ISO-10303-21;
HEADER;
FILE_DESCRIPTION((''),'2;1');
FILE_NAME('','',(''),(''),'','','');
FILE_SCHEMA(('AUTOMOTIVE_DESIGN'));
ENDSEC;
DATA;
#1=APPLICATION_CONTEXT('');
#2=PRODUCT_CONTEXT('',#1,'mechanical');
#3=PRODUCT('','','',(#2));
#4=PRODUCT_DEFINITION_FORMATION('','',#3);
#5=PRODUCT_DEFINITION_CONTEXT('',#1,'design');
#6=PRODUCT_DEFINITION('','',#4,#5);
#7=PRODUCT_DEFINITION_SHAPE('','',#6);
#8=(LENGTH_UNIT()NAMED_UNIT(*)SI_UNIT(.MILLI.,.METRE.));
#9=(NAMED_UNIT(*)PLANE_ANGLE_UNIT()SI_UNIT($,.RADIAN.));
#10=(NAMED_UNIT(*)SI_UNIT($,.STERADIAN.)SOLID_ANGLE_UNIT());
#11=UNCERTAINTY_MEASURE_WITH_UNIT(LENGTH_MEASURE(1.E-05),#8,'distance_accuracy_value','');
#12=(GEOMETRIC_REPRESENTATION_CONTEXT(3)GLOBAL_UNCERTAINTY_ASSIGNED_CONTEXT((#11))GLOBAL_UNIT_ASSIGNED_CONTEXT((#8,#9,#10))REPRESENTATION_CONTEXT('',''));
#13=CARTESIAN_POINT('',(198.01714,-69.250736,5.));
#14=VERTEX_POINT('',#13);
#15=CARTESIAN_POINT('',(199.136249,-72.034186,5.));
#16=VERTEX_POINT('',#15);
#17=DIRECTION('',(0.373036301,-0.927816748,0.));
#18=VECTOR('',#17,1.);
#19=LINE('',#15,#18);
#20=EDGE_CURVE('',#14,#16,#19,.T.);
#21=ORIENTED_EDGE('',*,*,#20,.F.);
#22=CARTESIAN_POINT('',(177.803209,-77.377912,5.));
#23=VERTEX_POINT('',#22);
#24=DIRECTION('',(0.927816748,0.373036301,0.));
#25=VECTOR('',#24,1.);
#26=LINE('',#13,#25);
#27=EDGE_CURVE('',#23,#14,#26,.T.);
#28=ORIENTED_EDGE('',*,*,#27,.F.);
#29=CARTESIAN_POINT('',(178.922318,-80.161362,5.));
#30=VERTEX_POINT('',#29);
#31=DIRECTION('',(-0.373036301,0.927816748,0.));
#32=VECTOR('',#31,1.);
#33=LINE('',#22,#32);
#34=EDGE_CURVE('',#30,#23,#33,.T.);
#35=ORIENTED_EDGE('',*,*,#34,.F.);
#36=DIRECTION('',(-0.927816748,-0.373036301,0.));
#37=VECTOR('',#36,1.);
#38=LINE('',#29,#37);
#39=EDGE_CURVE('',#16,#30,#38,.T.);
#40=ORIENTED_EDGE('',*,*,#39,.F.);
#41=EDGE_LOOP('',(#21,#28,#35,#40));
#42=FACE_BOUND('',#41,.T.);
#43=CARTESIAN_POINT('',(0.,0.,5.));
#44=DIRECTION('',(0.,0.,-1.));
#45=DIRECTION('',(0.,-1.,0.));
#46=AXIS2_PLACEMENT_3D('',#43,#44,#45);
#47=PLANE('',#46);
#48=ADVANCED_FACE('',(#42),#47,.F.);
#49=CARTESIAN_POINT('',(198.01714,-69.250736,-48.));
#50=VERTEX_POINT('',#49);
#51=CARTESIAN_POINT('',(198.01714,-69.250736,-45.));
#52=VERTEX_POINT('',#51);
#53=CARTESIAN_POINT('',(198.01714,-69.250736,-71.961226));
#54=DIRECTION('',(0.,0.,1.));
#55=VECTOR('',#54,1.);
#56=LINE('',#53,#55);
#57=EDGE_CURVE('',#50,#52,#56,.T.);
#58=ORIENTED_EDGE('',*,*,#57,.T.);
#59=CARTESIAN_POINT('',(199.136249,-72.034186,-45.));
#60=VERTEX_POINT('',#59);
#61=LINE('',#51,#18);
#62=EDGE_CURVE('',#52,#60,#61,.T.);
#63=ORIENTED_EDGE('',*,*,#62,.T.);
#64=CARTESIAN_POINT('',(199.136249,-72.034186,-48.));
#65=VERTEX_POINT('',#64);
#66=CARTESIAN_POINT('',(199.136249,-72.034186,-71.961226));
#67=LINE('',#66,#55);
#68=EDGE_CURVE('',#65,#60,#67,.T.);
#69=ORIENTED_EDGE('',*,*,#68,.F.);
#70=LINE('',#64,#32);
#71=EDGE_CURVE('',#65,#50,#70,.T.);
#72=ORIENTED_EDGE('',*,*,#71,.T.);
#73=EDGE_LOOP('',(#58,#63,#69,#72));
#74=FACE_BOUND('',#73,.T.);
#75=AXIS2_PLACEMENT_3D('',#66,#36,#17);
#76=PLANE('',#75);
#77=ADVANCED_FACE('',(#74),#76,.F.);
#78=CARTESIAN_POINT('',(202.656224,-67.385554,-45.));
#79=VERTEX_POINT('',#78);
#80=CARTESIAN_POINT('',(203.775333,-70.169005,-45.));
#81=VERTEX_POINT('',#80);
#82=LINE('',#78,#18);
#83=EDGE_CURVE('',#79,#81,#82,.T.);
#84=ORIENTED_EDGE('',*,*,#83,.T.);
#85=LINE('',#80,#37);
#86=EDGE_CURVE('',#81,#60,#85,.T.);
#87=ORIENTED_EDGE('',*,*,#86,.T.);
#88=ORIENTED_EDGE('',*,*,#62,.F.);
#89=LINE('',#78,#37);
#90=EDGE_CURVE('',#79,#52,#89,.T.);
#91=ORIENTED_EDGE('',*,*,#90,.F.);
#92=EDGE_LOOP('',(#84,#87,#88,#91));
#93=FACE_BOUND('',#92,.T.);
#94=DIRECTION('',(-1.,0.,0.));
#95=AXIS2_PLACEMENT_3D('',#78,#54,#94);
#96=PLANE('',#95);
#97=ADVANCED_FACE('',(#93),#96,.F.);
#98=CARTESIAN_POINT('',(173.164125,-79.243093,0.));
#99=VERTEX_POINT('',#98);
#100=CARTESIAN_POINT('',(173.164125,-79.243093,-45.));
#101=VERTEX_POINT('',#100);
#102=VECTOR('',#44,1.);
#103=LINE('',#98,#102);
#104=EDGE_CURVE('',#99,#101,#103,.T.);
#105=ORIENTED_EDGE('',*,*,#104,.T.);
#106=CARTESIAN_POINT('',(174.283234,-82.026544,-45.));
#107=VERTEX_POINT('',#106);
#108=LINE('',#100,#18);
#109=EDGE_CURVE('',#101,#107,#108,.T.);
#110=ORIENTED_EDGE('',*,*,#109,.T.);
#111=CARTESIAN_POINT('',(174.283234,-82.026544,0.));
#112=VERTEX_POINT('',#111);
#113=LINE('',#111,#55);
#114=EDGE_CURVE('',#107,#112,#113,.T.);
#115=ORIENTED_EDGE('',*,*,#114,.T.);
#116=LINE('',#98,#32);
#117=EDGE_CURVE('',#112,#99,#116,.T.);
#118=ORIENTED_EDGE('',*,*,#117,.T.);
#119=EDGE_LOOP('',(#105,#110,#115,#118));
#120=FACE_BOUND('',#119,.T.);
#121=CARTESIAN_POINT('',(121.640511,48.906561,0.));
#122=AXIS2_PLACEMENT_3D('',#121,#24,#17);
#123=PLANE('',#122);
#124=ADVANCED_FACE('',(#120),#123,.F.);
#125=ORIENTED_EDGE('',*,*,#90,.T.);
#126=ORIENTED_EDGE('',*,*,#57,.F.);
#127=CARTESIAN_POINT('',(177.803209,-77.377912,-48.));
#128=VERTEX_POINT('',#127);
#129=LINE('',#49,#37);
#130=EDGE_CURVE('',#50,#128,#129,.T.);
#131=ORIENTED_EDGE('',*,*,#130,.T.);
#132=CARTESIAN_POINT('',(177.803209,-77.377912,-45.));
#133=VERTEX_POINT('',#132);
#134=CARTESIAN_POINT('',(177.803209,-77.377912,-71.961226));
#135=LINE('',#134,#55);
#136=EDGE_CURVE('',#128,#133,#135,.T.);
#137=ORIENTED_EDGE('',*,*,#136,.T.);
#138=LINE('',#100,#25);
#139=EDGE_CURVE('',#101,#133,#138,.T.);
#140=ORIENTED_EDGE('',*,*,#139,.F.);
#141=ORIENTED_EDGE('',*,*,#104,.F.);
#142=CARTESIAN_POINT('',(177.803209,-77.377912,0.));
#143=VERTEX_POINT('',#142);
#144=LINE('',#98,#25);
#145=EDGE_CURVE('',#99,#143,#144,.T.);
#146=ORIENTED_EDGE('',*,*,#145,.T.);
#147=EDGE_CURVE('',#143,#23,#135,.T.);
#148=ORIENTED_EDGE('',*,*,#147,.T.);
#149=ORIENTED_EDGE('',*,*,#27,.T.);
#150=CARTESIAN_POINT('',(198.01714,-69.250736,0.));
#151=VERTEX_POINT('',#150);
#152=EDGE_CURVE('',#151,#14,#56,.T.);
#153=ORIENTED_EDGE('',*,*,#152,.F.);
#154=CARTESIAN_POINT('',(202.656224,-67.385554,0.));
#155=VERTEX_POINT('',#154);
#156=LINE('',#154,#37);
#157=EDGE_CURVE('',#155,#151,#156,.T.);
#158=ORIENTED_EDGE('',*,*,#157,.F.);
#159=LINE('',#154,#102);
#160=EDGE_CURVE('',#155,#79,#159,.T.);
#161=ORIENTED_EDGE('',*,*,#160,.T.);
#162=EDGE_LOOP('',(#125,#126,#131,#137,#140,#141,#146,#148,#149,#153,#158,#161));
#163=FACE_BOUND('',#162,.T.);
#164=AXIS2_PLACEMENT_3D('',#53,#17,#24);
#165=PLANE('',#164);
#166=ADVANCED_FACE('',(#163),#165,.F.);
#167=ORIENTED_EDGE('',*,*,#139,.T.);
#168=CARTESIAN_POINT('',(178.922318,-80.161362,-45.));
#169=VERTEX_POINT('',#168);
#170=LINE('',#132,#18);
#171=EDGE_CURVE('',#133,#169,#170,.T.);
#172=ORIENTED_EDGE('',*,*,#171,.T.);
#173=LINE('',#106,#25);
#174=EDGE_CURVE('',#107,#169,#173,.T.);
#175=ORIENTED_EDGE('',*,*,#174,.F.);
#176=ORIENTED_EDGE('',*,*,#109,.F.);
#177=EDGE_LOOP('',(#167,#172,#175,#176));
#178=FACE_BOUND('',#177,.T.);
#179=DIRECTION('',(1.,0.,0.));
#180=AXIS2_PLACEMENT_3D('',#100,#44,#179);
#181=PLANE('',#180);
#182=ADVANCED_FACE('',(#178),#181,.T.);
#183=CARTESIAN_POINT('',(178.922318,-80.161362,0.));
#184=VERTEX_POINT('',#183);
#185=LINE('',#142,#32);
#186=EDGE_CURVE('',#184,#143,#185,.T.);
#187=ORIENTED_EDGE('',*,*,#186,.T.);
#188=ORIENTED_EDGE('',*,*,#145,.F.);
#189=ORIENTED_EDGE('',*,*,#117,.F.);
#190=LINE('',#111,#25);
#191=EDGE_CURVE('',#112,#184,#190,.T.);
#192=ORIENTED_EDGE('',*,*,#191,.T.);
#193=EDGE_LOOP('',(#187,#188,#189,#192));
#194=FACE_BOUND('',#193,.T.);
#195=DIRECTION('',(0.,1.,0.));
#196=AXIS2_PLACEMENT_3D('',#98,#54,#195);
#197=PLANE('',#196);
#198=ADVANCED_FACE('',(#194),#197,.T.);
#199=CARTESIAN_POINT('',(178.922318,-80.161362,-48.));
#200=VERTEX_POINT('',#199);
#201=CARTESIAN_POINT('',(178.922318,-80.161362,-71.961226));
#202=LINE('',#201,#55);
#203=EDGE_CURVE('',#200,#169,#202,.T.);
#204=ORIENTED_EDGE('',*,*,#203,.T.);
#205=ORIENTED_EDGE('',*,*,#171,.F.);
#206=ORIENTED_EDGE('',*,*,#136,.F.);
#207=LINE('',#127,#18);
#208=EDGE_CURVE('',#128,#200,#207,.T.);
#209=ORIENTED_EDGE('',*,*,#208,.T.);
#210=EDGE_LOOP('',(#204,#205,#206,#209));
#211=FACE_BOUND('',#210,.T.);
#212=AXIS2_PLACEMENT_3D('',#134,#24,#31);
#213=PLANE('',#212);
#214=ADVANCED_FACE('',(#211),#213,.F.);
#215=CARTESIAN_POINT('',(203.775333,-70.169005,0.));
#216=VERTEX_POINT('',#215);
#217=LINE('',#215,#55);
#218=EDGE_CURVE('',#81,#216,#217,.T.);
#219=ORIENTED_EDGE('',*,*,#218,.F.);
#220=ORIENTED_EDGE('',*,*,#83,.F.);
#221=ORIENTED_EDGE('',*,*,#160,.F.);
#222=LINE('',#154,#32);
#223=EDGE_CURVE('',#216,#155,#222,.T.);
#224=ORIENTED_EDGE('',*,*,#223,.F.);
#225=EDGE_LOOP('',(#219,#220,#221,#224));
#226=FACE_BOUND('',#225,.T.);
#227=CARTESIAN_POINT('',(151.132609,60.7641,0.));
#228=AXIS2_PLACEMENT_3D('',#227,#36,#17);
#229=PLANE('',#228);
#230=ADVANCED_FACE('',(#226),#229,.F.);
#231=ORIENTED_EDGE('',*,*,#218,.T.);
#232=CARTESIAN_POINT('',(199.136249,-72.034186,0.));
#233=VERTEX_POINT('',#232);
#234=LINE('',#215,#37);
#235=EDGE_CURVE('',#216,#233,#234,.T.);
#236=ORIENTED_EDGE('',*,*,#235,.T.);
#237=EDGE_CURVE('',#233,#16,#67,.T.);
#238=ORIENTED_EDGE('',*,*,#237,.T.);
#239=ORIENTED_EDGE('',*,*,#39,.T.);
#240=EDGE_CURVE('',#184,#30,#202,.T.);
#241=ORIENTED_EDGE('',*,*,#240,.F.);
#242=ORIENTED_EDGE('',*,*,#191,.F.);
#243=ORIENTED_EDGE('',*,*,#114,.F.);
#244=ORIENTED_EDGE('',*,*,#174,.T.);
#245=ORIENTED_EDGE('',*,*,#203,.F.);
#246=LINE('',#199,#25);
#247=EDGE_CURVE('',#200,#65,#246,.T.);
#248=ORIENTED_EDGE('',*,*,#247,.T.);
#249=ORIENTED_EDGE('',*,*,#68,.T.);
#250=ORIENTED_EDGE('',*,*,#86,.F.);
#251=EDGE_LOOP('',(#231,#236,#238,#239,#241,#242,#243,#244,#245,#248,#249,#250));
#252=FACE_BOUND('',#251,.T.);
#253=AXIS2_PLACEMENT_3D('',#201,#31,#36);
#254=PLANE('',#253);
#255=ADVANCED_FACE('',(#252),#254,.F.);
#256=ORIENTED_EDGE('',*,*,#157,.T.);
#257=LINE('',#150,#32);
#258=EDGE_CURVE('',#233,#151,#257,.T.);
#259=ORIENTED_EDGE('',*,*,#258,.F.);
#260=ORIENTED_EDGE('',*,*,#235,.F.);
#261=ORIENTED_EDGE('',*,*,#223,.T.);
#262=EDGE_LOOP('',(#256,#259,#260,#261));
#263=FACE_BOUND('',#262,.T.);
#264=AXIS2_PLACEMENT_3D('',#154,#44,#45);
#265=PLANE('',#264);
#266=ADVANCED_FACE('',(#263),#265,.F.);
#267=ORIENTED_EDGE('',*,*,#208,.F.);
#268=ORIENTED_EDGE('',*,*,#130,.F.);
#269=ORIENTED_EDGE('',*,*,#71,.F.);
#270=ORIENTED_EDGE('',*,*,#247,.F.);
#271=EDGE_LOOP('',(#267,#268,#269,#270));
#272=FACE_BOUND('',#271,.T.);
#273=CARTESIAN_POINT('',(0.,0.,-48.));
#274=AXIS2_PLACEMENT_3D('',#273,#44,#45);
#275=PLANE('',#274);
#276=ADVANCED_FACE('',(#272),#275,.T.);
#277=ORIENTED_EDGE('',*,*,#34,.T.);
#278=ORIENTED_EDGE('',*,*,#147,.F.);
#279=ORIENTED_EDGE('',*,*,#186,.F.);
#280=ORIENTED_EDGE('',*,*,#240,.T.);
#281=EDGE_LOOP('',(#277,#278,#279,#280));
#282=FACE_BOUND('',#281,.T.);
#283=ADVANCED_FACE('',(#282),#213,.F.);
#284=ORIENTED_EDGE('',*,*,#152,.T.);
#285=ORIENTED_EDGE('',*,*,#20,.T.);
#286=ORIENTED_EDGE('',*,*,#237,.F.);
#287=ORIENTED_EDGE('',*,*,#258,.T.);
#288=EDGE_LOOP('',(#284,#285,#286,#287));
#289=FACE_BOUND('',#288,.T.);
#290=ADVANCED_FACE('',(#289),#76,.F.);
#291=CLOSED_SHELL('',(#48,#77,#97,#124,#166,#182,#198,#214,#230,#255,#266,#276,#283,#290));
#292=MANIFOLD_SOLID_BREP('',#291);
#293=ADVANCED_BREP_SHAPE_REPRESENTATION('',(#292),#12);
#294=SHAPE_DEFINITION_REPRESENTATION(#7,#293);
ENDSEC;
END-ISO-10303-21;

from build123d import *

# Parameters (mm, degrees)
ESTRUSIONE_ESTRUSIONE1_DEPTH      = 48
ESTRUSIONE_ESTRUSIONE1_DEPTH_BACK = 5
SCHIZZO2_W                        = 45
SCHIZZO2_H                        = 3
ESTRUSIONE_ESTRUSIONE2_DEPTH      = 5
CORPO_SPOSTA_COPIA1_START         = 131.104025403
CORPO_SPOSTA_COPIA1_OUTLINE_W     = 3
CORPO_SPOSTA_COPIA1_OUTLINE_H     = 43
CORPO_SPOSTA_COPIA1_DEPTH         = 31.786555516
CORPO_SPOSTA_COPIA1_2_OUTLINE_W   = 3
CORPO_SPOSTA_COPIA1_2_OUTLINE_H   = 5
CORPO_SPOSTA_COPIA1_2_DEPTH       = 5
CORPO_SPOSTA_COPIA1_START_2       = 157.890580919
CORPO_SPOSTA_COPIA1_3_OUTLINE_W   = 3
CORPO_SPOSTA_COPIA1_3_OUTLINE_H   = 5
CORPO_SPOSTA_COPIA1_3_DEPTH       = 5
CORPO_SPOSTA_COPIA1_4_OUTLINE_W   = 3
CORPO_SPOSTA_COPIA1_4_OUTLINE_H   = 45
CORPO_SPOSTA_COPIA1_4_DEPTH       = 31.786555516
CORPO_SPOSTA_COPIA1_START_3       = 136.104025403
CORPO_SPOSTA_COPIA1_5_OUTLINE_W   = 3
CORPO_SPOSTA_COPIA1_5_OUTLINE_H   = 3
CORPO_SPOSTA_COPIA1_5_DEPTH       = 21.786555516


# Read off the part's stored shape, not the designer's step: Corpo-Sposta/copia1
with BuildPart() as part:
    # Schizzo1 → Estrusione-Estrusione1 (new, two sides: drawn at the far end of the back side and taken through both)
    with BuildSketch(Plane.XY.offset(-ESTRUSIONE_ESTRUSIONE1_DEPTH_BACK)):
        Polygon((198.017140331, -69.250735791), (177.803209237, -77.377911869), (178.92231814, -80.161362114), (199.136249234, -72.034186035), align=None)
    extrude(amount=ESTRUSIONE_ESTRUSIONE1_DEPTH + ESTRUSIONE_ESTRUSIONE1_DEPTH_BACK)

    # Schizzo2 → Estrusione-Estrusione2 (add)
    with BuildSketch(Plane(origin=(146.49352536, 58.898918246, 0), x_dir=(0, 0, -1), z_dir=(0.9278167482016688, 0.3730363008562049, 0))):
        with Locations((-22.5, -139.619574027)):
            Rectangle(SCHIZZO2_W, SCHIZZO2_H)
    estrusione_estrusione2 = extrude(amount=ESTRUSIONE_ESTRUSIONE2_DEPTH)

    # Specchia1: Estrusione-Estrusione2 across plane
    add(estrusione_estrusione2.mirror(Plane(origin=(136.386559813, 54.835330207, 0), x_dir=(0, 0, 1), z_dir=(0.9278167482016688, 0.37303630085620504, 0))))

    # Corpo-Sposta/copia1 outline → Corpo-Sposta/copia1 (cut)
    with BuildSketch(Plane(origin=(0, 0, 0), x_dir=(-0.373036300856202, 0.92781674820167, 0), z_dir=(0.92781674820167, 0.373036300856202, 0)).offset(CORPO_SPOSTA_COPIA1_START)):
        with Locations((-139.619574027, 26.5)):
            Rectangle(CORPO_SPOSTA_COPIA1_OUTLINE_W, CORPO_SPOSTA_COPIA1_OUTLINE_H)
    extrude(amount=CORPO_SPOSTA_COPIA1_DEPTH, mode=Mode.SUBTRACT)

    # Corpo-Sposta_copia1 2 outline → Corpo-Sposta_copia1 2 (cut)
    with BuildSketch(Plane(origin=(0, 0, 0), x_dir=(-0.373036300856202, 0.92781674820167, 0), z_dir=(0.92781674820167, 0.373036300856202, 0)).offset(CORPO_SPOSTA_COPIA1_START)):
        with Locations((-139.619574027, 2.5)):
            Rectangle(CORPO_SPOSTA_COPIA1_2_OUTLINE_W, CORPO_SPOSTA_COPIA1_2_OUTLINE_H)
    extrude(amount=CORPO_SPOSTA_COPIA1_2_DEPTH, mode=Mode.SUBTRACT)

    # Corpo-Sposta_copia1 3 outline → Corpo-Sposta_copia1 3 (cut)
    with BuildSketch(Plane(origin=(0, 0, 0), x_dir=(-0.373036300856202, 0.92781674820167, 0), z_dir=(0.92781674820167, 0.373036300856202, 0)).offset(CORPO_SPOSTA_COPIA1_START_2)):
        with Locations((-139.619574027, 2.5)):
            Rectangle(CORPO_SPOSTA_COPIA1_3_OUTLINE_W, CORPO_SPOSTA_COPIA1_3_OUTLINE_H)
    extrude(amount=CORPO_SPOSTA_COPIA1_3_DEPTH, mode=Mode.SUBTRACT)

    # Corpo-Sposta_copia1 4 outline → Corpo-Sposta_copia1 4 (add)
    with BuildSketch(Plane(origin=(0, 0, 0), x_dir=(-0.373036300856202, 0.92781674820167, 0), z_dir=(0.92781674820167, 0.373036300856202, 0)).offset(CORPO_SPOSTA_COPIA1_START)):
        with Locations((-139.619574027, -22.5)):
            Rectangle(CORPO_SPOSTA_COPIA1_4_OUTLINE_W, CORPO_SPOSTA_COPIA1_4_OUTLINE_H)
    extrude(amount=CORPO_SPOSTA_COPIA1_4_DEPTH)

    # Corpo-Sposta_copia1 5 outline → Corpo-Sposta_copia1 5 (add)
    with BuildSketch(Plane(origin=(0, 0, 0), x_dir=(-0.373036300856202, 0.92781674820167, 0), z_dir=(0.92781674820167, 0.373036300856202, 0)).offset(CORPO_SPOSTA_COPIA1_START_3)):
        with Locations((-139.619574027, -46.5)):
            Rectangle(CORPO_SPOSTA_COPIA1_5_OUTLINE_W, CORPO_SPOSTA_COPIA1_5_OUTLINE_H)
    extrude(amount=CORPO_SPOSTA_COPIA1_5_DEPTH)


solid = part.part
